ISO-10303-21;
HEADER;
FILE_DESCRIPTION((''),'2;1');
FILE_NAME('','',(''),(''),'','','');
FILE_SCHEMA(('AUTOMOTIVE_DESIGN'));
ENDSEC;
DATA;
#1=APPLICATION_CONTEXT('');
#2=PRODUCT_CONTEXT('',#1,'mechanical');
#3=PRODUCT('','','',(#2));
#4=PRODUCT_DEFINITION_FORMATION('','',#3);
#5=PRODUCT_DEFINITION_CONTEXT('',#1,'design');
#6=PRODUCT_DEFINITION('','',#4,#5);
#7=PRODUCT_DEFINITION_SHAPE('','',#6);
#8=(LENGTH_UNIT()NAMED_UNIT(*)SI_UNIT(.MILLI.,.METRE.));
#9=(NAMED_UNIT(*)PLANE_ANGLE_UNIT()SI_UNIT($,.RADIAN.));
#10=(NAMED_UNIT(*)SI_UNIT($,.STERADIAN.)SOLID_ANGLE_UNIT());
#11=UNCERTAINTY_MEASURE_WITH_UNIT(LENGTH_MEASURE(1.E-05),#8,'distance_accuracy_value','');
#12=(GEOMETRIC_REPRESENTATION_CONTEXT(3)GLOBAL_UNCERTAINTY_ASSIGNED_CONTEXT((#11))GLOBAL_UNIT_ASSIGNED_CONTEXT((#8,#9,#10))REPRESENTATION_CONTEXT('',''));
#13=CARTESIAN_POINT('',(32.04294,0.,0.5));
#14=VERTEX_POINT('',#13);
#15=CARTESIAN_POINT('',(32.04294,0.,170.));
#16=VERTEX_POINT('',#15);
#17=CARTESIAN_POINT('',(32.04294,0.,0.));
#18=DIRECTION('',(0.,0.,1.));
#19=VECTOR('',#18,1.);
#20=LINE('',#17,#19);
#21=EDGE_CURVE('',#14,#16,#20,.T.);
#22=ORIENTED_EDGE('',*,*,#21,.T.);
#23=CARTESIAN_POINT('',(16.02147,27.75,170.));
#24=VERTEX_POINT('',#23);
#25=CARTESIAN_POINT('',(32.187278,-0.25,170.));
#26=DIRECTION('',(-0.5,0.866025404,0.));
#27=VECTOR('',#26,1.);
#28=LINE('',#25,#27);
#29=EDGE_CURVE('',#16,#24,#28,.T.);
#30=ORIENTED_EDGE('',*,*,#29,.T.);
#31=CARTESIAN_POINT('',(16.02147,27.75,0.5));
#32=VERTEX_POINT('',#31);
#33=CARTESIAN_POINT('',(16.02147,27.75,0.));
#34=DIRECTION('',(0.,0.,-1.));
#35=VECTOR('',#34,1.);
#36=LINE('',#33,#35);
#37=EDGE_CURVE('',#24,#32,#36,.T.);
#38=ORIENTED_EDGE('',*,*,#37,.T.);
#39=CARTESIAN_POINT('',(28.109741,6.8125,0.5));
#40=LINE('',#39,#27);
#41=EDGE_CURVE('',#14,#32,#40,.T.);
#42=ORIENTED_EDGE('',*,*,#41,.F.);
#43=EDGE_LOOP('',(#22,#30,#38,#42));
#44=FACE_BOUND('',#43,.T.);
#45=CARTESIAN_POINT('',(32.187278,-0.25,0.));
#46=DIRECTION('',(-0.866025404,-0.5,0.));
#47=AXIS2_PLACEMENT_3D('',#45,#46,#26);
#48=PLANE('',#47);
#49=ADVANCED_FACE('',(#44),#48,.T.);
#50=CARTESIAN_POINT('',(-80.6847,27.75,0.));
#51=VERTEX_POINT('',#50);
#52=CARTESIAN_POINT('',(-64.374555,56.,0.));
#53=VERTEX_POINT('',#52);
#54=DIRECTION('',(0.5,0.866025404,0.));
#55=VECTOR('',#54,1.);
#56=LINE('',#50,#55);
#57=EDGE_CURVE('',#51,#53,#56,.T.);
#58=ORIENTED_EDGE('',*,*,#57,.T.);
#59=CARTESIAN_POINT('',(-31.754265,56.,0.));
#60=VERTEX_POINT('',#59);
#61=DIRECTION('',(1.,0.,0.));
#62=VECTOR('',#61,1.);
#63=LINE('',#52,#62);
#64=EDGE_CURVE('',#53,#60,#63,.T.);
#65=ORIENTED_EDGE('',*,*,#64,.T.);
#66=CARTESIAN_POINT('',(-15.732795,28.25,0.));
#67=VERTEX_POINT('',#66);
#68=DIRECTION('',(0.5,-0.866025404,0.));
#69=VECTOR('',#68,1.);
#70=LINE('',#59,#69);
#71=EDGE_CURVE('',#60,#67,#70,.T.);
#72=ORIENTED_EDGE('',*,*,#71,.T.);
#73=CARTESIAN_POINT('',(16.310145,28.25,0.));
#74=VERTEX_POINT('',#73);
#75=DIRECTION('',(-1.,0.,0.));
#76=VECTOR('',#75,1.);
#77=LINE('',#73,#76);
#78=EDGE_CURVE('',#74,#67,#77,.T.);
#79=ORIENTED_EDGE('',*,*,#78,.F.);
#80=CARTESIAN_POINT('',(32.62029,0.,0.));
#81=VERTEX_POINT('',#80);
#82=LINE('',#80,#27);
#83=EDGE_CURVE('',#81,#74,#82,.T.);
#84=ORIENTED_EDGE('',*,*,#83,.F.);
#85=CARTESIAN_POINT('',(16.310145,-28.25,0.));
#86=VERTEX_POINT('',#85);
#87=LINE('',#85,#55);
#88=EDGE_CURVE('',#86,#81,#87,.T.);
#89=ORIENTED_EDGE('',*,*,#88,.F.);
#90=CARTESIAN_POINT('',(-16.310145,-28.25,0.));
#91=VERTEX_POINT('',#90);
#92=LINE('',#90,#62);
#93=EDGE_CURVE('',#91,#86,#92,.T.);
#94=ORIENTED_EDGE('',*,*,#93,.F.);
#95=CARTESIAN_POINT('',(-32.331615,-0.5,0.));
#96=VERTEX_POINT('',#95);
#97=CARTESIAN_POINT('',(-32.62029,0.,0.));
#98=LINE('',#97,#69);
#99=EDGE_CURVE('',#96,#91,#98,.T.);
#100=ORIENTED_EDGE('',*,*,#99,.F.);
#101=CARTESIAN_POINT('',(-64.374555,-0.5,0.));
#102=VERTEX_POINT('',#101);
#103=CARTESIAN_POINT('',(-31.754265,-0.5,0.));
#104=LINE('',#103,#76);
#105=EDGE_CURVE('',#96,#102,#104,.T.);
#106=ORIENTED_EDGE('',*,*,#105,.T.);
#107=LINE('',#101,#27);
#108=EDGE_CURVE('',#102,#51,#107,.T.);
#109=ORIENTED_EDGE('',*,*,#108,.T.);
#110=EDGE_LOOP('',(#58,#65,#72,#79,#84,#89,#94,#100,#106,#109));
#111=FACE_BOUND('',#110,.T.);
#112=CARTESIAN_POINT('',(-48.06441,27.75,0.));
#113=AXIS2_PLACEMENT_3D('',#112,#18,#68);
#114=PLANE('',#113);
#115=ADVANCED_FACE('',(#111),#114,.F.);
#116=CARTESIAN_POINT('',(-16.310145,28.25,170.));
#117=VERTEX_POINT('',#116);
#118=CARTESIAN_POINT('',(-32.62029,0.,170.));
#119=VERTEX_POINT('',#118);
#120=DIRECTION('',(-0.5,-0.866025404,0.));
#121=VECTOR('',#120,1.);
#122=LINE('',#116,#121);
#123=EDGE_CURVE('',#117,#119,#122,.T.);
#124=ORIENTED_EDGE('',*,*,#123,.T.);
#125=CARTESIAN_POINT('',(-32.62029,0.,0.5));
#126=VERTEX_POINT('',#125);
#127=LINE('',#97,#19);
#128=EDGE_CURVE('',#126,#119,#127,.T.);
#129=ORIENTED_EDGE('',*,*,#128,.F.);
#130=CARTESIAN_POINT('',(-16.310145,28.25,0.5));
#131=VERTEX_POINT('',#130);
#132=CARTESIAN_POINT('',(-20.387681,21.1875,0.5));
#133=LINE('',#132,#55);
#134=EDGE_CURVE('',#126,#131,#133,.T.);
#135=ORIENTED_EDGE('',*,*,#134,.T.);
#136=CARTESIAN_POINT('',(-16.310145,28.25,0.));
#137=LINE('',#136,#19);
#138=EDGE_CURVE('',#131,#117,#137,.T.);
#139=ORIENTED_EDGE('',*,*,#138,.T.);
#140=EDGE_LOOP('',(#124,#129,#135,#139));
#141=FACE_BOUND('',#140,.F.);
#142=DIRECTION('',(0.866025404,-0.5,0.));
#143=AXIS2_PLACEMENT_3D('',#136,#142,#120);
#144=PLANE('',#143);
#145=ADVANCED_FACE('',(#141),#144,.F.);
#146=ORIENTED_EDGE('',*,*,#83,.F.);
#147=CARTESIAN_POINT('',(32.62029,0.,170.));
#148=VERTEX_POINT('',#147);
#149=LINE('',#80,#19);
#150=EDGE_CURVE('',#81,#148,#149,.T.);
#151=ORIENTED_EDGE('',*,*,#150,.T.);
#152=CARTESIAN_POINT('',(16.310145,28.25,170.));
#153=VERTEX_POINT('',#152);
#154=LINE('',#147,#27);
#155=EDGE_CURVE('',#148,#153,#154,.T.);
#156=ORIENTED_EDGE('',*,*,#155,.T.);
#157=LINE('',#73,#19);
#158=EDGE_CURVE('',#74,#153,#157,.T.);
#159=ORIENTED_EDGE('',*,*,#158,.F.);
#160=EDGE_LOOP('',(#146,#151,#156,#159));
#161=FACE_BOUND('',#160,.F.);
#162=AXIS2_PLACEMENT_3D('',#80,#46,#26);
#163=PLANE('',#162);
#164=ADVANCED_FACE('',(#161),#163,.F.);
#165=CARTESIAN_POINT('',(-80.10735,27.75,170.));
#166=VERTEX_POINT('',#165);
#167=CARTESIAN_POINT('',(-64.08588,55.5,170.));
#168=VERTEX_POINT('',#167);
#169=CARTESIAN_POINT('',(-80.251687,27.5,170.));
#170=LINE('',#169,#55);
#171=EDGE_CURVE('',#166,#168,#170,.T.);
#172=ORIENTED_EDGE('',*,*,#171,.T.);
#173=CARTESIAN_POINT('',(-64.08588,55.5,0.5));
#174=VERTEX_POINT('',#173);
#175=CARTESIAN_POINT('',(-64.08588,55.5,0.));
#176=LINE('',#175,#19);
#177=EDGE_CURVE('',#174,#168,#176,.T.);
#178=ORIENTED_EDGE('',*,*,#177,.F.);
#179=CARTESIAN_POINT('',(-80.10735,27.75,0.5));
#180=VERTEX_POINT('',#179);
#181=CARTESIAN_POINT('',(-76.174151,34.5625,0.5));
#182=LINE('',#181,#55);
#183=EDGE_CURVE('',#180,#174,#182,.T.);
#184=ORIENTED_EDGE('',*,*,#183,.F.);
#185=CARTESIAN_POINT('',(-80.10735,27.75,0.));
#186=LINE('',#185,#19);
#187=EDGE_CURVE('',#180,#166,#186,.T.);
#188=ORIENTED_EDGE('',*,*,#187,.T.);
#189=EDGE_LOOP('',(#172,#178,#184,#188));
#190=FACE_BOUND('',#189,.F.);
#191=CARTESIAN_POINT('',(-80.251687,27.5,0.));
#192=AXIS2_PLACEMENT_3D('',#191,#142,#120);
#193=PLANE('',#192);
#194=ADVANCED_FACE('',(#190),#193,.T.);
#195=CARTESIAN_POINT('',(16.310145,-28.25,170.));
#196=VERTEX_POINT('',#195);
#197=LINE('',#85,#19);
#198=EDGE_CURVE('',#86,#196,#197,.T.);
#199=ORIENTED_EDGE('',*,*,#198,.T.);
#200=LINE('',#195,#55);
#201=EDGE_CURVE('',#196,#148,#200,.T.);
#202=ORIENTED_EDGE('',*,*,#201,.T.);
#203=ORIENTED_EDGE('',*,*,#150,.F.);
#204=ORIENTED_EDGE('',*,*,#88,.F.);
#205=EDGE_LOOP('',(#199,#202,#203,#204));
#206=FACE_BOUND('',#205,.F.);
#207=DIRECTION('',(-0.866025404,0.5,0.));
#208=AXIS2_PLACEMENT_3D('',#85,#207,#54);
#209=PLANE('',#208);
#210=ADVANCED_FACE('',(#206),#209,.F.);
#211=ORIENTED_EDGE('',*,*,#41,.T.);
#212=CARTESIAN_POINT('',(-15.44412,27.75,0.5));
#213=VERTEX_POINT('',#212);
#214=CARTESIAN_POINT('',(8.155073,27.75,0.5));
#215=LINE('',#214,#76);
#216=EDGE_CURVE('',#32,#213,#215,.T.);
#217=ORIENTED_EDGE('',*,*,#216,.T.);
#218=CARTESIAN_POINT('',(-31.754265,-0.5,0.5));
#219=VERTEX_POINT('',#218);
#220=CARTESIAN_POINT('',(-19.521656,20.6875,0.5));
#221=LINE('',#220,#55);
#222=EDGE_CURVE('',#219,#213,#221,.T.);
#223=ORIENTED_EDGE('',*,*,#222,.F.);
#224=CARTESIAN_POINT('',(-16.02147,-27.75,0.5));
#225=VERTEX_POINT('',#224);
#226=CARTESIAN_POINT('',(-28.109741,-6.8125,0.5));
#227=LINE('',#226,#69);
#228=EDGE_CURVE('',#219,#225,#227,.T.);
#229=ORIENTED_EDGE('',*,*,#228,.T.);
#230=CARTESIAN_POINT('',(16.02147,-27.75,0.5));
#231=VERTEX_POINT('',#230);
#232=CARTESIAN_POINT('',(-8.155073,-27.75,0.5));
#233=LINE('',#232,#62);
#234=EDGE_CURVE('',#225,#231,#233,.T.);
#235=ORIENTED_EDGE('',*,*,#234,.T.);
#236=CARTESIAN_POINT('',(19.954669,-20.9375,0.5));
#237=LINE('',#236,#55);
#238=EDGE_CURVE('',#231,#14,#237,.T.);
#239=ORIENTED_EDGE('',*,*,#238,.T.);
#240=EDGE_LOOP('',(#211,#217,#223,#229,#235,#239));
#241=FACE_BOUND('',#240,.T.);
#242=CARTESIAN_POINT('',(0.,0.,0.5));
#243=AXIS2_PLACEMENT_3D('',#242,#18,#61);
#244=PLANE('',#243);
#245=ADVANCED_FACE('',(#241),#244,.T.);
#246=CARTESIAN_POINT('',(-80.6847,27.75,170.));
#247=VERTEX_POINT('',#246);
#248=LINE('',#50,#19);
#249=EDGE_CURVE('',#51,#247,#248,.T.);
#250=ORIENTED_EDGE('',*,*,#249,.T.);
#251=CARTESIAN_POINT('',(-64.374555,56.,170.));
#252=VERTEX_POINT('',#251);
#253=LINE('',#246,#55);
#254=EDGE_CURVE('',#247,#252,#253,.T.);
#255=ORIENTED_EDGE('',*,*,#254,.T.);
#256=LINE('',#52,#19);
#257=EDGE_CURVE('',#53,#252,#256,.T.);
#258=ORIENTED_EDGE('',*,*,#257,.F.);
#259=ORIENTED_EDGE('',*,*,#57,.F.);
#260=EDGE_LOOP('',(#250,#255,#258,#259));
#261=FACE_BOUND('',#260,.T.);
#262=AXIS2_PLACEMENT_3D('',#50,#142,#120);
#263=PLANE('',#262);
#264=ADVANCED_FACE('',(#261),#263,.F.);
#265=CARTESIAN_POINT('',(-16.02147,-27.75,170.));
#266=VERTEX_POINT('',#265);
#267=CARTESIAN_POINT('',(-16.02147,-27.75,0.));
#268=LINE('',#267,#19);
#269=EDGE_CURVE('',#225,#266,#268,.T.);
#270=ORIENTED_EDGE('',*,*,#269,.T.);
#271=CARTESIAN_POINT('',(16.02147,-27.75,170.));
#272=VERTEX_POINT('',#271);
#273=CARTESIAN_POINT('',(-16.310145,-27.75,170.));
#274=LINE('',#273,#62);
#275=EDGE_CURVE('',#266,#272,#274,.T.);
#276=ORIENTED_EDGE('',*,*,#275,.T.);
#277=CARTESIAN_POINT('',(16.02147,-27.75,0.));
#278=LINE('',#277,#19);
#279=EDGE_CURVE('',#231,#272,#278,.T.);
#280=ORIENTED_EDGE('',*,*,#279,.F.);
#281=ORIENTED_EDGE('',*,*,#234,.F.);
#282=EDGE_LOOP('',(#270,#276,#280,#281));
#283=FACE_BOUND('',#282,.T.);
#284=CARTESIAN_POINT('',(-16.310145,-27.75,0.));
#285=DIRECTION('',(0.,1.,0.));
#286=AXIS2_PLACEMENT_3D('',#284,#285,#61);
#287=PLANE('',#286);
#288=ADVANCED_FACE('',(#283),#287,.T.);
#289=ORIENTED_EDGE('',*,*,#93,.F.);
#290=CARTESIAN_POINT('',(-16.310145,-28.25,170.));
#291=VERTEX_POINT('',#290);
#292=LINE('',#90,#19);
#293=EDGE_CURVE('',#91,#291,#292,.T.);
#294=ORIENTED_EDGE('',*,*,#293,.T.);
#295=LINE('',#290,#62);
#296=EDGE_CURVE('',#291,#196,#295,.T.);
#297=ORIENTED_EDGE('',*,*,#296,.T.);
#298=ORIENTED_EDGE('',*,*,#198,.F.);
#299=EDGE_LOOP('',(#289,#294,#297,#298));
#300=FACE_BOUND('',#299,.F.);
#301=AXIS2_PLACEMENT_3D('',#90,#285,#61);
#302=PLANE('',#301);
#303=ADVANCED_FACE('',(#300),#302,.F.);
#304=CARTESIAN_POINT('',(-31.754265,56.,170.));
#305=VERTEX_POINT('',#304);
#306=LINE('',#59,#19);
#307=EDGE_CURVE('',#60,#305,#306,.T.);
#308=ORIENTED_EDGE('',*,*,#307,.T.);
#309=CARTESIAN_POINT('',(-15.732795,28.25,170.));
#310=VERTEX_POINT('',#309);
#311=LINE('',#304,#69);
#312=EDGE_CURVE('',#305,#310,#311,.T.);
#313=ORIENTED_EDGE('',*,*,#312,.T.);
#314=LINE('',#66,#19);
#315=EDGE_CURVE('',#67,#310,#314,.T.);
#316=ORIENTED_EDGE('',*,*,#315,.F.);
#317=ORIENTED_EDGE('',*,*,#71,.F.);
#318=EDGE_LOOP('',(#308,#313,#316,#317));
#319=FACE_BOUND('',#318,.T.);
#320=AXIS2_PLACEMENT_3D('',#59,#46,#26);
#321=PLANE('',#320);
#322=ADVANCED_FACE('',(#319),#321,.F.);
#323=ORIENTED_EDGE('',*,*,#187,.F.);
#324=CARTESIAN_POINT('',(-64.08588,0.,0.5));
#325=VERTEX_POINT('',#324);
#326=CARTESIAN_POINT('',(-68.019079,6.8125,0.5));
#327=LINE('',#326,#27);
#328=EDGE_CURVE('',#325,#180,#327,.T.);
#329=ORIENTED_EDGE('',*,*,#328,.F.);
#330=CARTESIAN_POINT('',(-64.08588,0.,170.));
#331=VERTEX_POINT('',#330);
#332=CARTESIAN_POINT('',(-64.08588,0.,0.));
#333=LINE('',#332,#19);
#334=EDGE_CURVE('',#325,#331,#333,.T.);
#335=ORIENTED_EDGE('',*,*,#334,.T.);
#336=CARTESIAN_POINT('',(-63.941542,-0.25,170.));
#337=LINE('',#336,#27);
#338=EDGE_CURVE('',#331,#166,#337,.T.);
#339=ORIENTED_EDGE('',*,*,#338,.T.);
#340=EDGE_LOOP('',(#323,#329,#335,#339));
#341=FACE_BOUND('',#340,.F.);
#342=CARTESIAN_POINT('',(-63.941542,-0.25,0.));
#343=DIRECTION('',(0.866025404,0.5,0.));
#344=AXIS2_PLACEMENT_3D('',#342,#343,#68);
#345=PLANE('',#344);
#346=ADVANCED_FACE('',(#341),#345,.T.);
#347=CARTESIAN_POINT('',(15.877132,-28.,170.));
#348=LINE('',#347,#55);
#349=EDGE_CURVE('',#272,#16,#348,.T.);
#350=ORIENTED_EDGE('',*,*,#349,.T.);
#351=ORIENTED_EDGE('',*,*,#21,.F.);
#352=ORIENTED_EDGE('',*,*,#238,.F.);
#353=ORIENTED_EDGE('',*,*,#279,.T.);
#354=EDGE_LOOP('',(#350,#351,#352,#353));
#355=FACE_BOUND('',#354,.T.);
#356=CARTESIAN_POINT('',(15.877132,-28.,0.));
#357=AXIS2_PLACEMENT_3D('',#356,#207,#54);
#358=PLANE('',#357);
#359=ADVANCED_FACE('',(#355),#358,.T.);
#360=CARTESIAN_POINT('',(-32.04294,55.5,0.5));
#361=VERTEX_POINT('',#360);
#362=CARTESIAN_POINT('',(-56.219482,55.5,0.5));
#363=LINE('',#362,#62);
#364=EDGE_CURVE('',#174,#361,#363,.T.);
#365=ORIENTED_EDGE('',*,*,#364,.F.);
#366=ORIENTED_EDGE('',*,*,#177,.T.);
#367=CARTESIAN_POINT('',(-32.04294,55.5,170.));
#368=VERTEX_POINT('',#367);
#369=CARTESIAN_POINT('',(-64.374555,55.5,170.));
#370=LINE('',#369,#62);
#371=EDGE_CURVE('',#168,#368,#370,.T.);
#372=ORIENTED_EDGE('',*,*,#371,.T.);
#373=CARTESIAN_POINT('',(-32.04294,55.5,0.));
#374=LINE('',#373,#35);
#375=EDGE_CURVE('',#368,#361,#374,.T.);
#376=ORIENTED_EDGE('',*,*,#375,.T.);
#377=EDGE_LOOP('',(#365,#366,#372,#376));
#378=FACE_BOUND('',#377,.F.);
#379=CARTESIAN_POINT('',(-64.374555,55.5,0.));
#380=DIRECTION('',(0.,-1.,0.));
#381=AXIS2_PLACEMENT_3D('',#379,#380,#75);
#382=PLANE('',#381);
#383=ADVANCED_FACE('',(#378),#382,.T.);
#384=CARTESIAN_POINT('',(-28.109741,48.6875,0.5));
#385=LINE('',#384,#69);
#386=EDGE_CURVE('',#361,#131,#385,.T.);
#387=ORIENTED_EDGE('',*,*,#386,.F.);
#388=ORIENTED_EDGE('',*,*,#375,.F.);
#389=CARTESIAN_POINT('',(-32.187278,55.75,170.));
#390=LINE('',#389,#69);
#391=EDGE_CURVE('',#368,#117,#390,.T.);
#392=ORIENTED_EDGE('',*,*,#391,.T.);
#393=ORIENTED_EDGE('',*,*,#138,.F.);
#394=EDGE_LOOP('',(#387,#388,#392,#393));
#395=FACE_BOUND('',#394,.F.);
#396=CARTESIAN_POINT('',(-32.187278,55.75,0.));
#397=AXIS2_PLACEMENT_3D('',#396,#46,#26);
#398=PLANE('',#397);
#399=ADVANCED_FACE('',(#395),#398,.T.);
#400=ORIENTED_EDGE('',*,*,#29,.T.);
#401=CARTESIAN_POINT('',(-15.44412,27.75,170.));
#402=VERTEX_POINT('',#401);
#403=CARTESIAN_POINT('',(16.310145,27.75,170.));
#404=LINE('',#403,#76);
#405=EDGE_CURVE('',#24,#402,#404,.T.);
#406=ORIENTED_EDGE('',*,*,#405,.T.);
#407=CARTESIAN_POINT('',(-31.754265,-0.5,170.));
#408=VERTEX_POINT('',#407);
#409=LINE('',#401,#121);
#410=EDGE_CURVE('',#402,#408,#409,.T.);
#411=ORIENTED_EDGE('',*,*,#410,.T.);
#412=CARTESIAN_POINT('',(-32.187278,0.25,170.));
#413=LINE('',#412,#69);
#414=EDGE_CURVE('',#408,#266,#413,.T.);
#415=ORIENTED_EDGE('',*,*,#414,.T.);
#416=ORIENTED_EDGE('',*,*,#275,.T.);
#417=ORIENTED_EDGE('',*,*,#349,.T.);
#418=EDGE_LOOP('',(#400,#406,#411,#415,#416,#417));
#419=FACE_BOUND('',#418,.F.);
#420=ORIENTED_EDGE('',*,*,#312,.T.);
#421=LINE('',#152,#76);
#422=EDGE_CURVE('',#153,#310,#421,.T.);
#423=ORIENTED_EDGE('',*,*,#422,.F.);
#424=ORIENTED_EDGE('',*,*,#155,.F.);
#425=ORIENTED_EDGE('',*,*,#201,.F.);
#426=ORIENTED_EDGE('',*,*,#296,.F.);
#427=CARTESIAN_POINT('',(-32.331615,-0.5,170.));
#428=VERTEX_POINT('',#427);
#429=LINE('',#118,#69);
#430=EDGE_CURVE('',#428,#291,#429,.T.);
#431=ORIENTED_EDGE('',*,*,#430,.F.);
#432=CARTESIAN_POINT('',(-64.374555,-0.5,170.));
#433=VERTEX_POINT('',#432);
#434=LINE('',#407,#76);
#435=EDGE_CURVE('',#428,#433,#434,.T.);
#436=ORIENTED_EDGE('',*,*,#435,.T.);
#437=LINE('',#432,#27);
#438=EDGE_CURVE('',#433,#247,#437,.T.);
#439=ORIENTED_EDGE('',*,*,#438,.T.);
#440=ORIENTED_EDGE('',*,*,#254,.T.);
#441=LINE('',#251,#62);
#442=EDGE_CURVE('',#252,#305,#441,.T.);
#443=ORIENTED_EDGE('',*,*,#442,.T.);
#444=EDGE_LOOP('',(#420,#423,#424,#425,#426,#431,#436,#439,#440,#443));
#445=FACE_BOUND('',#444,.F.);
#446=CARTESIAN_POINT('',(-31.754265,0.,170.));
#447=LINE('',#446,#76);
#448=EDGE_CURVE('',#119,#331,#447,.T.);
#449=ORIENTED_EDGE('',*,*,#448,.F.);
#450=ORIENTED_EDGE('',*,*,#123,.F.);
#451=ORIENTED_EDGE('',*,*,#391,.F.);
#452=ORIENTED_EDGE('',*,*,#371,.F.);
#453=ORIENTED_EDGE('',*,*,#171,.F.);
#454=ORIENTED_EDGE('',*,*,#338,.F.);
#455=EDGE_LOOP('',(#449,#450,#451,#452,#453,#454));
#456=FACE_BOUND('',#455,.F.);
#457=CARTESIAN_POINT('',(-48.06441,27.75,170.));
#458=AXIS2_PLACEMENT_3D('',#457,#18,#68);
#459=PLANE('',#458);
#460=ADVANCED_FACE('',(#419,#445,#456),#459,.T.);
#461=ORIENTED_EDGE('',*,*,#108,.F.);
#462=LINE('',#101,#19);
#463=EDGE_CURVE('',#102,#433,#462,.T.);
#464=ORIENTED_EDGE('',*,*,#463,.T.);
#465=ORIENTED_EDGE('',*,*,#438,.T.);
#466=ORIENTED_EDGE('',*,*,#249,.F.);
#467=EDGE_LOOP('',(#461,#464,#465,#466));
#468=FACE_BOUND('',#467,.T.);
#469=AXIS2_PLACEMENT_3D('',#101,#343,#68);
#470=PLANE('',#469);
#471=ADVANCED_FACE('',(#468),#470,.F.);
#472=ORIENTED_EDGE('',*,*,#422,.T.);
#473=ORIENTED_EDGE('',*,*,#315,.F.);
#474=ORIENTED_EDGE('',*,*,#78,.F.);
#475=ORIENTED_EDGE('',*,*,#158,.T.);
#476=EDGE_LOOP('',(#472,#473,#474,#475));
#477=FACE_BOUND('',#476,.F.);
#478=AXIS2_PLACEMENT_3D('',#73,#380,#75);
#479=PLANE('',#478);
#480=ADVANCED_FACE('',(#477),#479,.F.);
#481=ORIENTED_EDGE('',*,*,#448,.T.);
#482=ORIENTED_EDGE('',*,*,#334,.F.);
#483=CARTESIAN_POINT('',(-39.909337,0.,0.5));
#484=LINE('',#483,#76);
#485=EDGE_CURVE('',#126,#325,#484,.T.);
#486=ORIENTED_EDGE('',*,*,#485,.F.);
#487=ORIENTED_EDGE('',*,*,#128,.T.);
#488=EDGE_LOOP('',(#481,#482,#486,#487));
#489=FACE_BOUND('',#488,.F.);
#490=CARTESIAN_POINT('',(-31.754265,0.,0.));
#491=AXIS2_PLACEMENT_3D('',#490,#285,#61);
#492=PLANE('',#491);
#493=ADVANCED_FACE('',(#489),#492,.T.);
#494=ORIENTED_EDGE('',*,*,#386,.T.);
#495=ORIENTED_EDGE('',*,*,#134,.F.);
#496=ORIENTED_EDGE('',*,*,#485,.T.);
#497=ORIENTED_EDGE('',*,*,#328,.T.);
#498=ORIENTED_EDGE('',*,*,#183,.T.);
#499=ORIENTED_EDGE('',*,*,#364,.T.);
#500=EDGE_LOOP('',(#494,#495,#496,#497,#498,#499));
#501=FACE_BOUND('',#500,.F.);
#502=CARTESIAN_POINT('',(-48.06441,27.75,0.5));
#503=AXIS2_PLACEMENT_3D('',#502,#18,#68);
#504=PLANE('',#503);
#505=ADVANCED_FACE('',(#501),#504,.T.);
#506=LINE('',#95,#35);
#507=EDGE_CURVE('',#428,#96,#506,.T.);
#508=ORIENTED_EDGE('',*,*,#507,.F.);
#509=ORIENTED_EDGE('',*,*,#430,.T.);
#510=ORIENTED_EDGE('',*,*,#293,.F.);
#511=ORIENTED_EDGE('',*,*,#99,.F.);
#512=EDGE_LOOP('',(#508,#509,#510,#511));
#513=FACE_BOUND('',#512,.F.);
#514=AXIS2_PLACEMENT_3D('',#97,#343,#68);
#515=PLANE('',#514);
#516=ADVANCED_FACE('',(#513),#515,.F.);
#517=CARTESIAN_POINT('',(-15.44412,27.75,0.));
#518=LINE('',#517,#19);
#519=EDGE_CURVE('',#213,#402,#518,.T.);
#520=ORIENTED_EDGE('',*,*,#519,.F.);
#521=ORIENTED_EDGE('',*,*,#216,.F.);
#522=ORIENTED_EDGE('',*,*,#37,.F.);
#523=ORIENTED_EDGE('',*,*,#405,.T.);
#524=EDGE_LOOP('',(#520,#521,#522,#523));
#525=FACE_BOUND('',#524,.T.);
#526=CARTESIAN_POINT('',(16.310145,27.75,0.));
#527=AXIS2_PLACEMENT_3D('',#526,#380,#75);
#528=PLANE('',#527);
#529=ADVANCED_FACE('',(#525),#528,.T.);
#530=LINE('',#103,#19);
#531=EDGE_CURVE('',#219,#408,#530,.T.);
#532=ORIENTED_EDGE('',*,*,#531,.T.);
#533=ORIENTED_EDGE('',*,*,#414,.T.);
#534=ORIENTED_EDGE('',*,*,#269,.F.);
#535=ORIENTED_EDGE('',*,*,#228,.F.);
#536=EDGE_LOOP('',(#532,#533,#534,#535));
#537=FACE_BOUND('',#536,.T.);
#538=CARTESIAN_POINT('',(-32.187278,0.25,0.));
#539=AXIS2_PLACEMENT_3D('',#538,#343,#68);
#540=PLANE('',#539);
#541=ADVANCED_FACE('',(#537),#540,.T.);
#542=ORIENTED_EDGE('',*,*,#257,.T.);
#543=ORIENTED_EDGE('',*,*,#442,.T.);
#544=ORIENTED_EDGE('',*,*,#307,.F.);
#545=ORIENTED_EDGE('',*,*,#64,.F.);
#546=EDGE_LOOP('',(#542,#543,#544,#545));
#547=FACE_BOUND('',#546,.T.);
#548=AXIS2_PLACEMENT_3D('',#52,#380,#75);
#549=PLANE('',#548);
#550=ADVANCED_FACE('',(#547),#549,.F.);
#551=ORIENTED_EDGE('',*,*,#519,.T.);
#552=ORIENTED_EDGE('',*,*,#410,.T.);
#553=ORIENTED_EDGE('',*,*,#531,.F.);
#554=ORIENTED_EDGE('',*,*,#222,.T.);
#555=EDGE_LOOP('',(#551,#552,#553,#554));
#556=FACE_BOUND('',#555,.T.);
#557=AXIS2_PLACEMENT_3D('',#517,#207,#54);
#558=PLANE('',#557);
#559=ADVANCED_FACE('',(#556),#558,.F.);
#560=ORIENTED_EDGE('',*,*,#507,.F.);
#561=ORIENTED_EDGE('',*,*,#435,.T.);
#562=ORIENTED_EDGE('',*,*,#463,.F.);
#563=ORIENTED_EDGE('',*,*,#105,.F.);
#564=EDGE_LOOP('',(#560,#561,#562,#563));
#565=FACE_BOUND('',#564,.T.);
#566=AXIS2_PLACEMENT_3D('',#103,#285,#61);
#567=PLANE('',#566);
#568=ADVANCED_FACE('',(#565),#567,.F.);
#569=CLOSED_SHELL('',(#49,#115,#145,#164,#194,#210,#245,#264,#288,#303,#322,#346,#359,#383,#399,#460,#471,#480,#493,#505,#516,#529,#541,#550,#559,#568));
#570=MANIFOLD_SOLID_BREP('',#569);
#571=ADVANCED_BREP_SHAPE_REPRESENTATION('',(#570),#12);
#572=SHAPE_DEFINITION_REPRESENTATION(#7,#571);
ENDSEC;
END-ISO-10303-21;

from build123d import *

# Parameters (mm, degrees)
F1_DEPTH = 170
F2_T     = -0.5


# Not quite as in the source:
# - a feature names something its author has since deleted; it is built from what else it names


with BuildPart() as f1:
    # F0 (on Top) → F1 (new body)
    with BuildSketch(Plane.XY):
        Polygon((16.3101451046, 28.25), (-16.3101451046, 28.25), (-32.6202902092, 0), (-16.3101451046, -28.25), (16.3101451046, -28.25), (32.6202902092, 0), align=None)
    extrude(amount=F1_DEPTH)

    # F2
    f2_openings = [f1.faces().sort_by_distance(p)[0] for p in [
        (0, 0, 170),
    ]]
    offset(amount=F2_T, openings=f2_openings)

    # F3: F1 across face


with BuildPart() as f1_1:
    add(f1.part)
    add(f1.part.mirror(Plane(origin=(-24.032204955, 13.875, 85.25), x_dir=(0.5, 0.8660254038, 0), z_dir=(0.8660254038, -0.5, 0))))


solid = f1_1.part
